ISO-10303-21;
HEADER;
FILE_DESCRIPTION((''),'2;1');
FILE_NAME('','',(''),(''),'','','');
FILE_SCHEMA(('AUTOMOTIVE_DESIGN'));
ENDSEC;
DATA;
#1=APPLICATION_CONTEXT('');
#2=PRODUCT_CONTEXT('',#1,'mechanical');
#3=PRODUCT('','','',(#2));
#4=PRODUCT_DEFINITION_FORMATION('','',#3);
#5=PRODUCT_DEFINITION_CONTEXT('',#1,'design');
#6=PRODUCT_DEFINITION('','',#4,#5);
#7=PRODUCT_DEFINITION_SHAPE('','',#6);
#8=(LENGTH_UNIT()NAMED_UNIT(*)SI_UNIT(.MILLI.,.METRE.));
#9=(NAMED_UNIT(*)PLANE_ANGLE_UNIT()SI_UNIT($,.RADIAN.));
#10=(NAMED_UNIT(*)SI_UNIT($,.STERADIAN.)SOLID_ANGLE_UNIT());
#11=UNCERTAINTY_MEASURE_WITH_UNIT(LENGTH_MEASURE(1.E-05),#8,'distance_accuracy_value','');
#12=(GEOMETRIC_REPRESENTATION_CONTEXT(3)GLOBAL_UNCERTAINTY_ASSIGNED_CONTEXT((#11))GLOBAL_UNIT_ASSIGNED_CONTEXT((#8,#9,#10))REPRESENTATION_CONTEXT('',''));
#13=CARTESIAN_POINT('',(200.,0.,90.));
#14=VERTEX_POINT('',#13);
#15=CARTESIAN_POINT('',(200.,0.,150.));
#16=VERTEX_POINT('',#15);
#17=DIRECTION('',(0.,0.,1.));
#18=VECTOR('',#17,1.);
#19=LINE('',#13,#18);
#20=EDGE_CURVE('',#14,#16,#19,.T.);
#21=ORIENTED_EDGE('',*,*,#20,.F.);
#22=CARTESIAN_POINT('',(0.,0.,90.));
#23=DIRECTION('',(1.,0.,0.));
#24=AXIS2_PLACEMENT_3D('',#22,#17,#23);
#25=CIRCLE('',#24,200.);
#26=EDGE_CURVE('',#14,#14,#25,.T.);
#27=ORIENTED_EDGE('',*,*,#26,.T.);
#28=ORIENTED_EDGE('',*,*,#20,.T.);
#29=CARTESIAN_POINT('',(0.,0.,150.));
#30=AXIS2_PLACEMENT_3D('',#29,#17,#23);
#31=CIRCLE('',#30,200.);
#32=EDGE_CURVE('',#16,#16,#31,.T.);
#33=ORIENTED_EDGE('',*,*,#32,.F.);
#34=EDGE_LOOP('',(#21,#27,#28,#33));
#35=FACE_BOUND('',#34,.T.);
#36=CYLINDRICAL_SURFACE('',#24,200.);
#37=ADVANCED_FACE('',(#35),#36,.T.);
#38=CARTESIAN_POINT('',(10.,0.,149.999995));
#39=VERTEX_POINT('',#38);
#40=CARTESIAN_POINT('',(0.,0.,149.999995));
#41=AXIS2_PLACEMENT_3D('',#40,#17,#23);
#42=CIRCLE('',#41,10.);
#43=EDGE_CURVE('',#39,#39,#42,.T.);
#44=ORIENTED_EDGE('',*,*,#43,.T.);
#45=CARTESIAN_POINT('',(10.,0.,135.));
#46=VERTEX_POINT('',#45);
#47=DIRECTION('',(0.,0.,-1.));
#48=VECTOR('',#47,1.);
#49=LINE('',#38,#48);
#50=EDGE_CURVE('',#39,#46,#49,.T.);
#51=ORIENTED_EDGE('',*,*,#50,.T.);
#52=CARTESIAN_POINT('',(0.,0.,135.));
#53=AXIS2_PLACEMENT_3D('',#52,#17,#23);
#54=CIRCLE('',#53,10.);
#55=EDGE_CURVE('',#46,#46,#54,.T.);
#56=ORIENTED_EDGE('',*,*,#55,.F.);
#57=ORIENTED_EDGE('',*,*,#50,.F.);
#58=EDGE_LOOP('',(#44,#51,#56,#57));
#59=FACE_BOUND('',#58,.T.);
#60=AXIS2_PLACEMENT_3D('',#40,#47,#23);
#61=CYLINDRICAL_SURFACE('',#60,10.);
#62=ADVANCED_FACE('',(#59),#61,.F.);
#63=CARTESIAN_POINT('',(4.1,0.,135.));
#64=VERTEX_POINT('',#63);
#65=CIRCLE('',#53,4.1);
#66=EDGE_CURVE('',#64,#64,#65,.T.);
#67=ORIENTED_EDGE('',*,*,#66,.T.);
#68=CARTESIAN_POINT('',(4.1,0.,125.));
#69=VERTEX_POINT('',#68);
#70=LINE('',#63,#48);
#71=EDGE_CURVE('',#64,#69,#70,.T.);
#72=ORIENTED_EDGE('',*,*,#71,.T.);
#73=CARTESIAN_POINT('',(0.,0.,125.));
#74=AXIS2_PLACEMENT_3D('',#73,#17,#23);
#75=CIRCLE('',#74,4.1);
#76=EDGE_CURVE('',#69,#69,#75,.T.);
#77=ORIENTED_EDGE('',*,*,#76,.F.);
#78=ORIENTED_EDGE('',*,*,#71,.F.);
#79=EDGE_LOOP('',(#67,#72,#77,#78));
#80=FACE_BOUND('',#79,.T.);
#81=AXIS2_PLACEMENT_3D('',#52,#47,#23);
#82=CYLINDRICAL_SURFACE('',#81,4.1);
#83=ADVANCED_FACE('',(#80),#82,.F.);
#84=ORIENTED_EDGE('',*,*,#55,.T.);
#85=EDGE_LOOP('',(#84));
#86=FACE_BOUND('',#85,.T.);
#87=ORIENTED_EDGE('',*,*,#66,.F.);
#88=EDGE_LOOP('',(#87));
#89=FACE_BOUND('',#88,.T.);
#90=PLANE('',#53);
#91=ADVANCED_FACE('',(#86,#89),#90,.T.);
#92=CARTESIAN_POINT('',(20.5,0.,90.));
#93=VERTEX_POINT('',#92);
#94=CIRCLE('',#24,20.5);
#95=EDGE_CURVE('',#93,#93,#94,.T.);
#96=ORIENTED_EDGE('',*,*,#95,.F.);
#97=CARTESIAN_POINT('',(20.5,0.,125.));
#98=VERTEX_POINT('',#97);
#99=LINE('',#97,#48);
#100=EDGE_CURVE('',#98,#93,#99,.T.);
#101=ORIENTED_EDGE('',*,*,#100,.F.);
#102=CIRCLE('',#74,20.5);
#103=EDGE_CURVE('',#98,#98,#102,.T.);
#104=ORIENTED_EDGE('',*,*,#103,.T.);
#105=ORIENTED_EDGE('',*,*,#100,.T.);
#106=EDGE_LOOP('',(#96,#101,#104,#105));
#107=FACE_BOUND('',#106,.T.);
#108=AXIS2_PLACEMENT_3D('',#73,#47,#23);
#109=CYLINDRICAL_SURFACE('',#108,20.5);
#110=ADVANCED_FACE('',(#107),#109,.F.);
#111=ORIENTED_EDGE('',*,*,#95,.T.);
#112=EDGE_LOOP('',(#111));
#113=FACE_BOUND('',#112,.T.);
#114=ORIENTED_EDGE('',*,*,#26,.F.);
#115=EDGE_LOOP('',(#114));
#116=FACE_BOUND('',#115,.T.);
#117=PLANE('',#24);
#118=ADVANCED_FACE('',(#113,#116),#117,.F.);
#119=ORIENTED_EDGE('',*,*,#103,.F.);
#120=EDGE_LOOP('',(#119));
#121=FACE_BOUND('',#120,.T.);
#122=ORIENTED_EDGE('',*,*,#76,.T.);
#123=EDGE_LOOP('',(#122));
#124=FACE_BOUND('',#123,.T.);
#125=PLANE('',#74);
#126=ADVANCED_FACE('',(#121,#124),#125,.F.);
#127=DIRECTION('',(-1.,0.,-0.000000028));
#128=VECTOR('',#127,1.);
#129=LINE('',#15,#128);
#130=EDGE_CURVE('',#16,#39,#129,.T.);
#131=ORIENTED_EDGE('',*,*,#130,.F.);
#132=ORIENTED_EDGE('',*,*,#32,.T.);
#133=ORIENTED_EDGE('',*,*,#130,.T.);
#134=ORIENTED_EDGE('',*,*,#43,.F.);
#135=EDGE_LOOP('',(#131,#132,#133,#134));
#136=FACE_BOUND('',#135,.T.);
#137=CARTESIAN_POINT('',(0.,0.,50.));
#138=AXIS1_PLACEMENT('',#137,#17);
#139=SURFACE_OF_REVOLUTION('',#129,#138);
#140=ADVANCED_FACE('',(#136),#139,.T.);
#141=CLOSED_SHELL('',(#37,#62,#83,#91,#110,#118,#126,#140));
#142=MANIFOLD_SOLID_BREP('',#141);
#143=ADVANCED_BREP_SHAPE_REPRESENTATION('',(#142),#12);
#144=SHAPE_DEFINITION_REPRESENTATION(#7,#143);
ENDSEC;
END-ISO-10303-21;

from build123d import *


# Not quite as in the source:
# - ends of sketch curves that miss each other by under 0.0002 mm in the source are joined


with BuildPart() as f1:
    # F0 (on Front) → F1 (revolve)
    with BuildSketch(Plane.XZ):
        Polygon((10, 149.9999946356), (10, 135), (4.1, 135), (4.1, 125), (20.5, 125), (20.5, 90), (200, 90), (200, 150), align=None)
    revolve(axis=Axis((0, 0, 50), (0, 0, 1)))


solid = f1.part
